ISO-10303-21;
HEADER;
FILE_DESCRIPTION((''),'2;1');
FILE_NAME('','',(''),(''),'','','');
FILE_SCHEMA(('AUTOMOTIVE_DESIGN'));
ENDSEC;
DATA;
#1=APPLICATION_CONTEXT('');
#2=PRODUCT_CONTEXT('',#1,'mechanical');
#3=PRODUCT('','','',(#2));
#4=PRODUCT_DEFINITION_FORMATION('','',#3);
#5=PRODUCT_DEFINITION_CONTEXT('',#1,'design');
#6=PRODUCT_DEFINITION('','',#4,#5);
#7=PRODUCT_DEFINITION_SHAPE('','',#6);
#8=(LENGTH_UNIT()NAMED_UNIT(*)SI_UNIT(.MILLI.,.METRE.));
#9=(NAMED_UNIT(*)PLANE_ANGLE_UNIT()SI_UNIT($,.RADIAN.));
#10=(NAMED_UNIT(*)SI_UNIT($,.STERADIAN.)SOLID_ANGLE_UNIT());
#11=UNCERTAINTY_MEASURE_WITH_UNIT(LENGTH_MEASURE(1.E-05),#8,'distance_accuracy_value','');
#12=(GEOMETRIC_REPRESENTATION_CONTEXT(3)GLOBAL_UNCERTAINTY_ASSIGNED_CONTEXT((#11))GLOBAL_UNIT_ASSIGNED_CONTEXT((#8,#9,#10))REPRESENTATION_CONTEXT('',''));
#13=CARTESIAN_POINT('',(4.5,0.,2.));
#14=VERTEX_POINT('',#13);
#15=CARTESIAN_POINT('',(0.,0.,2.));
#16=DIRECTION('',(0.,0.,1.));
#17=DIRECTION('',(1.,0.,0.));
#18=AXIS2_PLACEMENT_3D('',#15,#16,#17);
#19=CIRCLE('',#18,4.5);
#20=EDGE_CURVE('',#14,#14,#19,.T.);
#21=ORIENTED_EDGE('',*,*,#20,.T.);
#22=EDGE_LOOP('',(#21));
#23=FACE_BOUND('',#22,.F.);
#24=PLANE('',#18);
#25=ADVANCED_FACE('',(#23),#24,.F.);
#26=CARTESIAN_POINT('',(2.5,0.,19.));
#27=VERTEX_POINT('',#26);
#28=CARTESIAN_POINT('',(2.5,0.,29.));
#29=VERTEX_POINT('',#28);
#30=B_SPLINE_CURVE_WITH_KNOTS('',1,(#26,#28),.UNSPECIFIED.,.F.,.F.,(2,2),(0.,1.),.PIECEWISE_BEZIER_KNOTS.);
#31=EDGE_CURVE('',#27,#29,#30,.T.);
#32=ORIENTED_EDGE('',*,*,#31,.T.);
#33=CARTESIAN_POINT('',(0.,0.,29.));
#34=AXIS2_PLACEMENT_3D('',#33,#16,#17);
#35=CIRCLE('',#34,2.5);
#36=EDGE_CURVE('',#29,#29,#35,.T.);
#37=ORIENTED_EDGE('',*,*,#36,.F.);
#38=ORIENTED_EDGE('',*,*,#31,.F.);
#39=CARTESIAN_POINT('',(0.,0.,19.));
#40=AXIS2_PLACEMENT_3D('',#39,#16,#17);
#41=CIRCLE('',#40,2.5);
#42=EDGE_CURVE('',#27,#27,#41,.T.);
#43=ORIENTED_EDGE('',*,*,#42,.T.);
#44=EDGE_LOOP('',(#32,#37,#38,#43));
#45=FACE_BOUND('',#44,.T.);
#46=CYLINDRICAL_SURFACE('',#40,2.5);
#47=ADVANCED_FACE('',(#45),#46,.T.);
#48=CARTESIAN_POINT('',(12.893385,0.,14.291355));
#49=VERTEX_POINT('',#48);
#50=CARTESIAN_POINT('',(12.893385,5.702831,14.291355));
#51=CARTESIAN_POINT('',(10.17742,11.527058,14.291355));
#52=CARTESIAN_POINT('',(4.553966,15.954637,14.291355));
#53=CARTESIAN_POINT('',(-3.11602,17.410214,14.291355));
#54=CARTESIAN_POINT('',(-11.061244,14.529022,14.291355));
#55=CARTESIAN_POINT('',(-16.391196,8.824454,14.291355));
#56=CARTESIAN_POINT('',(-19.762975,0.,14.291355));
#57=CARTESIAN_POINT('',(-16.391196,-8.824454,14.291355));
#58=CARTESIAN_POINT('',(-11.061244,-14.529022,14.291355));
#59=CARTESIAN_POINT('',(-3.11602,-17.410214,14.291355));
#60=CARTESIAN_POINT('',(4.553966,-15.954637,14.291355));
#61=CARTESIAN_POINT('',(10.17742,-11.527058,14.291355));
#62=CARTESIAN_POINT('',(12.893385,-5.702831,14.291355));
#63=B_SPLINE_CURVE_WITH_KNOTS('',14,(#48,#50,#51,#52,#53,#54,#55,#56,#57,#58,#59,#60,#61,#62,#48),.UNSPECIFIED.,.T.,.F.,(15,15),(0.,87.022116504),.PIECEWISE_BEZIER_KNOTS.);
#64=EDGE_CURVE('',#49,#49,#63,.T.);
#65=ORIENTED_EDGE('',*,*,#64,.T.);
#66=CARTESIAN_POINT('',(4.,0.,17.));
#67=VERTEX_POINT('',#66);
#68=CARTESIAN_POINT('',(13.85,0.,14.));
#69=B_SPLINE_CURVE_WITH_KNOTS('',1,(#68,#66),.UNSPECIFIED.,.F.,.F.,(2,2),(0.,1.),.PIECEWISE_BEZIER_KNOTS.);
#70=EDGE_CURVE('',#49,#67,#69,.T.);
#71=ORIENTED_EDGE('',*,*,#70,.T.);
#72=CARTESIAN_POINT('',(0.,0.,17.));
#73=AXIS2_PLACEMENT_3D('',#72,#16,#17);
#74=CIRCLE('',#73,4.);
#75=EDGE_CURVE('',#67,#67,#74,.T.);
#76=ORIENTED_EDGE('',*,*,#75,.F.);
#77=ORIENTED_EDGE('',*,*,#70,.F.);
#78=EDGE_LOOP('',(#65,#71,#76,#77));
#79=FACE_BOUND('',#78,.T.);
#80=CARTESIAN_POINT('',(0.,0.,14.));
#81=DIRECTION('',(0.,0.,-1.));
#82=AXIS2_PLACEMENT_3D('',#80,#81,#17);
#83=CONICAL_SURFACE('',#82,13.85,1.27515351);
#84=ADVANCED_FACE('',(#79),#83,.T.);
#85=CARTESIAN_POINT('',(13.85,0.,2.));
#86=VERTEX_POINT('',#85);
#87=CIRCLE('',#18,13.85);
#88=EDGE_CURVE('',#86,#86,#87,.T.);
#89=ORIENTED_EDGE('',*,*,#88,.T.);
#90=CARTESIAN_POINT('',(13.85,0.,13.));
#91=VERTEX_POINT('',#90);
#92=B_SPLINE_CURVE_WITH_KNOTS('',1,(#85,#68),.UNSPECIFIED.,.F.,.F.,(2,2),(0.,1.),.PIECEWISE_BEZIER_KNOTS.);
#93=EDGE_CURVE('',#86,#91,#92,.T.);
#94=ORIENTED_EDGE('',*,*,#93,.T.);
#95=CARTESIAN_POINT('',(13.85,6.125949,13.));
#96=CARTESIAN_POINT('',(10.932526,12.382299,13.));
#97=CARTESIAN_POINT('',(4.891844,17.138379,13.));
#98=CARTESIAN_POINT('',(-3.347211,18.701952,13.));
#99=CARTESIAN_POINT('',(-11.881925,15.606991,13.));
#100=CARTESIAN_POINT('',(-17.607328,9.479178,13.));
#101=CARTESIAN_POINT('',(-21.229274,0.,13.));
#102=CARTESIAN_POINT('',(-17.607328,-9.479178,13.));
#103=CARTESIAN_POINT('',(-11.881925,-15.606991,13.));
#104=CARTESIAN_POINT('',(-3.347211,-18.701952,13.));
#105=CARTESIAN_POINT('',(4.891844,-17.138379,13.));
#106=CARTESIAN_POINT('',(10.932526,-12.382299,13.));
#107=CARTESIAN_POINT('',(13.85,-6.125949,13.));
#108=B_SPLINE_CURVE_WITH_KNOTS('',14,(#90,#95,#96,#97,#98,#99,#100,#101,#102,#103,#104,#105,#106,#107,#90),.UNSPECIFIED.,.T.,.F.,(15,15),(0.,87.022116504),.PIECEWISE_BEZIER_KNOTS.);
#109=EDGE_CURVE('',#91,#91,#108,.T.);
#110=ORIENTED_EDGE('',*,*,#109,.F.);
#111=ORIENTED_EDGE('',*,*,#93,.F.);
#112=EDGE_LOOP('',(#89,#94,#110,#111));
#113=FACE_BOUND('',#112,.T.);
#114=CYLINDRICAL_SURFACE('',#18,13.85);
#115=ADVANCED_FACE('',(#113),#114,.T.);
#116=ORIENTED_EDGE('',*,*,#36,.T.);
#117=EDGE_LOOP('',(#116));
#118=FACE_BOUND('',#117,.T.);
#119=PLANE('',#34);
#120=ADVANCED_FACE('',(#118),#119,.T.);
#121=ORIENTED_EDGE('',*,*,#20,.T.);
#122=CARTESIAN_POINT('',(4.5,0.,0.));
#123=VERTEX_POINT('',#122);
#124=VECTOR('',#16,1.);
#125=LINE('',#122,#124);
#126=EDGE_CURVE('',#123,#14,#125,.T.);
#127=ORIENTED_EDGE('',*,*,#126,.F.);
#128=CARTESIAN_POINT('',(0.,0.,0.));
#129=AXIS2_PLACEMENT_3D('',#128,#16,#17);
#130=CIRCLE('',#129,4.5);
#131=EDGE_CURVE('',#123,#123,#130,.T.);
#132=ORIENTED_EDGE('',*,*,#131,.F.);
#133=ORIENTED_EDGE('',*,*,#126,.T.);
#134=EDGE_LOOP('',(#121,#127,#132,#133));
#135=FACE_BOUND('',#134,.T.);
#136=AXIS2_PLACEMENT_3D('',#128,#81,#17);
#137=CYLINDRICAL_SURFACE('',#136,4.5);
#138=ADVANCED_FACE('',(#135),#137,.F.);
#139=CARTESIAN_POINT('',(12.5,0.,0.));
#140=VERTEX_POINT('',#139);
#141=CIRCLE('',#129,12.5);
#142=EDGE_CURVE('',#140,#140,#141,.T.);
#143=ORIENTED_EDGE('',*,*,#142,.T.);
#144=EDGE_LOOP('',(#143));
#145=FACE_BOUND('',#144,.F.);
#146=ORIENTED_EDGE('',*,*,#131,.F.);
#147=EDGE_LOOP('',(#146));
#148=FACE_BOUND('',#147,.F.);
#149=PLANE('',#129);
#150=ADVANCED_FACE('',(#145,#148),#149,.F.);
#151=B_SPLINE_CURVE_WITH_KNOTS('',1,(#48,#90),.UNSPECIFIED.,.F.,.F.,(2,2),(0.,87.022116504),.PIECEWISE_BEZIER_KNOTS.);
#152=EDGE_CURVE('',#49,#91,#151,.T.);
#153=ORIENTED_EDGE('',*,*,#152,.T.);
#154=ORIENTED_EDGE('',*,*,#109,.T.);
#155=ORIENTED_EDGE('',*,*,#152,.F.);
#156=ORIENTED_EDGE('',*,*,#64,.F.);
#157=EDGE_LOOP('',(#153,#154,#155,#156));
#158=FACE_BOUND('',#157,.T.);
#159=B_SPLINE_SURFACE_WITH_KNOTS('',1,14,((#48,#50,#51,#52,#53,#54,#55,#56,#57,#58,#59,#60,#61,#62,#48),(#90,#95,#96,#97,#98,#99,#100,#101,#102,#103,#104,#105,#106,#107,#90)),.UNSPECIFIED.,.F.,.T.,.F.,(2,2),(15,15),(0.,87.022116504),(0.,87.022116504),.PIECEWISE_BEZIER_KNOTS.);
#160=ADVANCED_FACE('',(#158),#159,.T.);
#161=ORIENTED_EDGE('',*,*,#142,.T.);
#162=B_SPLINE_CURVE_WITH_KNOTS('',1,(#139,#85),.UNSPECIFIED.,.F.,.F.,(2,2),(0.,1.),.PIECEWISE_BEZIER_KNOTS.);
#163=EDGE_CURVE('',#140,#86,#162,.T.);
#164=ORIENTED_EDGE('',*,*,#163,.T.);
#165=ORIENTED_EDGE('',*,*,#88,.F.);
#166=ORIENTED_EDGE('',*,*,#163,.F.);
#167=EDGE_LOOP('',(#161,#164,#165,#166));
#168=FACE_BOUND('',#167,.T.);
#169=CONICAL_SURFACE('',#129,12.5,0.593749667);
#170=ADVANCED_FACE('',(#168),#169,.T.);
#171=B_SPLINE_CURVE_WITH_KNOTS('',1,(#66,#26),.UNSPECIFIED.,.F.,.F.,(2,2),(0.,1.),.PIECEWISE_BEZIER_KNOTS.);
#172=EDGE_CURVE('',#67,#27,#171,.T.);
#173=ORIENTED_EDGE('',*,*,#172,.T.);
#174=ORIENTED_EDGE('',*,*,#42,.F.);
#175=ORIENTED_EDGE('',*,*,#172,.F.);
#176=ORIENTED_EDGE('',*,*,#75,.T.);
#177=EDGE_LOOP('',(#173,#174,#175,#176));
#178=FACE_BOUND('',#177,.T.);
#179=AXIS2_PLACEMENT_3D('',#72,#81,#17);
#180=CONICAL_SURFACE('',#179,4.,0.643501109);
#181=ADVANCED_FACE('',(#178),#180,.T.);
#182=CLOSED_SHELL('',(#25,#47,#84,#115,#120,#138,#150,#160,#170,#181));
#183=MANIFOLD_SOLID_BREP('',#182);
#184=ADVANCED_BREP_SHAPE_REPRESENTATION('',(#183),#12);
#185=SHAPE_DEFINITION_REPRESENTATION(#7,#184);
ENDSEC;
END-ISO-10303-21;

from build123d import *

# Parameters (mm, degrees)
F5_R       = 12.5
F6_R       = 13.85
F11_FACE_R = 13.85
F7_R       = 13.85
F12_FACE_R = 13.85
F9_R       = 4
F13_FACE_R = 4
F8_R       = 2.5
F14_FACE_R = 2.5
F10_R      = 2.5
F16_SIZE   = 1
F17_R      = 4.5
F18_DEPTH  = 2


with BuildPart() as f11:
    # F5 (on Top) → F11 section 0
    with BuildSketch(Plane.XY):
        Circle(F5_R)
    # F6 (on offset) → F11 section 1
    with BuildSketch(Plane.XY.offset(2)):
        Circle(F6_R)
    loft()

    # F11_face (on face) → F12 section 0
    with BuildSketch(Plane.XY.offset(2)):
        Circle(F11_FACE_R)
    # F7 (on offset) → F12 section 1
    with BuildSketch(Plane.XY.offset(14)):
        Circle(F7_R)
    loft()

    # F12_face (on face) → F13 section 0
    with BuildSketch(Plane.XY.offset(14)):
        Circle(F12_FACE_R)
    # F9 (on offset) → F13 section 1
    with BuildSketch(Plane.XY.offset(17)):
        Circle(F9_R)
    loft()

    # F13_face (on face) → F14 section 0
    with BuildSketch(Plane.XY.offset(17)):
        Circle(F13_FACE_R)
    # F8 (on offset) → F14 section 1
    with BuildSketch(Plane.XY.offset(19)):
        Circle(F8_R)
    loft()

    # F14_face (on face) → F15 section 0
    with BuildSketch(Plane.XY.offset(19)):
        Circle(F14_FACE_R)
    # F10 (on offset) → F15 section 1
    with BuildSketch(Plane.XY.offset(29)):
        Circle(F10_R)
    loft()

    # F16
    f16_edges = [f11.edges().sort_by_distance(p)[0] for p in [
        (-13.85, 0, 14),
    ]]
    chamfer(f16_edges, length=F16_SIZE)

    # F17 (on Top) → F18 (cut)
    with BuildSketch(Plane.XY):
        Circle(F17_R)
    extrude(amount=F18_DEPTH, mode=Mode.SUBTRACT)


solid = f11.part
